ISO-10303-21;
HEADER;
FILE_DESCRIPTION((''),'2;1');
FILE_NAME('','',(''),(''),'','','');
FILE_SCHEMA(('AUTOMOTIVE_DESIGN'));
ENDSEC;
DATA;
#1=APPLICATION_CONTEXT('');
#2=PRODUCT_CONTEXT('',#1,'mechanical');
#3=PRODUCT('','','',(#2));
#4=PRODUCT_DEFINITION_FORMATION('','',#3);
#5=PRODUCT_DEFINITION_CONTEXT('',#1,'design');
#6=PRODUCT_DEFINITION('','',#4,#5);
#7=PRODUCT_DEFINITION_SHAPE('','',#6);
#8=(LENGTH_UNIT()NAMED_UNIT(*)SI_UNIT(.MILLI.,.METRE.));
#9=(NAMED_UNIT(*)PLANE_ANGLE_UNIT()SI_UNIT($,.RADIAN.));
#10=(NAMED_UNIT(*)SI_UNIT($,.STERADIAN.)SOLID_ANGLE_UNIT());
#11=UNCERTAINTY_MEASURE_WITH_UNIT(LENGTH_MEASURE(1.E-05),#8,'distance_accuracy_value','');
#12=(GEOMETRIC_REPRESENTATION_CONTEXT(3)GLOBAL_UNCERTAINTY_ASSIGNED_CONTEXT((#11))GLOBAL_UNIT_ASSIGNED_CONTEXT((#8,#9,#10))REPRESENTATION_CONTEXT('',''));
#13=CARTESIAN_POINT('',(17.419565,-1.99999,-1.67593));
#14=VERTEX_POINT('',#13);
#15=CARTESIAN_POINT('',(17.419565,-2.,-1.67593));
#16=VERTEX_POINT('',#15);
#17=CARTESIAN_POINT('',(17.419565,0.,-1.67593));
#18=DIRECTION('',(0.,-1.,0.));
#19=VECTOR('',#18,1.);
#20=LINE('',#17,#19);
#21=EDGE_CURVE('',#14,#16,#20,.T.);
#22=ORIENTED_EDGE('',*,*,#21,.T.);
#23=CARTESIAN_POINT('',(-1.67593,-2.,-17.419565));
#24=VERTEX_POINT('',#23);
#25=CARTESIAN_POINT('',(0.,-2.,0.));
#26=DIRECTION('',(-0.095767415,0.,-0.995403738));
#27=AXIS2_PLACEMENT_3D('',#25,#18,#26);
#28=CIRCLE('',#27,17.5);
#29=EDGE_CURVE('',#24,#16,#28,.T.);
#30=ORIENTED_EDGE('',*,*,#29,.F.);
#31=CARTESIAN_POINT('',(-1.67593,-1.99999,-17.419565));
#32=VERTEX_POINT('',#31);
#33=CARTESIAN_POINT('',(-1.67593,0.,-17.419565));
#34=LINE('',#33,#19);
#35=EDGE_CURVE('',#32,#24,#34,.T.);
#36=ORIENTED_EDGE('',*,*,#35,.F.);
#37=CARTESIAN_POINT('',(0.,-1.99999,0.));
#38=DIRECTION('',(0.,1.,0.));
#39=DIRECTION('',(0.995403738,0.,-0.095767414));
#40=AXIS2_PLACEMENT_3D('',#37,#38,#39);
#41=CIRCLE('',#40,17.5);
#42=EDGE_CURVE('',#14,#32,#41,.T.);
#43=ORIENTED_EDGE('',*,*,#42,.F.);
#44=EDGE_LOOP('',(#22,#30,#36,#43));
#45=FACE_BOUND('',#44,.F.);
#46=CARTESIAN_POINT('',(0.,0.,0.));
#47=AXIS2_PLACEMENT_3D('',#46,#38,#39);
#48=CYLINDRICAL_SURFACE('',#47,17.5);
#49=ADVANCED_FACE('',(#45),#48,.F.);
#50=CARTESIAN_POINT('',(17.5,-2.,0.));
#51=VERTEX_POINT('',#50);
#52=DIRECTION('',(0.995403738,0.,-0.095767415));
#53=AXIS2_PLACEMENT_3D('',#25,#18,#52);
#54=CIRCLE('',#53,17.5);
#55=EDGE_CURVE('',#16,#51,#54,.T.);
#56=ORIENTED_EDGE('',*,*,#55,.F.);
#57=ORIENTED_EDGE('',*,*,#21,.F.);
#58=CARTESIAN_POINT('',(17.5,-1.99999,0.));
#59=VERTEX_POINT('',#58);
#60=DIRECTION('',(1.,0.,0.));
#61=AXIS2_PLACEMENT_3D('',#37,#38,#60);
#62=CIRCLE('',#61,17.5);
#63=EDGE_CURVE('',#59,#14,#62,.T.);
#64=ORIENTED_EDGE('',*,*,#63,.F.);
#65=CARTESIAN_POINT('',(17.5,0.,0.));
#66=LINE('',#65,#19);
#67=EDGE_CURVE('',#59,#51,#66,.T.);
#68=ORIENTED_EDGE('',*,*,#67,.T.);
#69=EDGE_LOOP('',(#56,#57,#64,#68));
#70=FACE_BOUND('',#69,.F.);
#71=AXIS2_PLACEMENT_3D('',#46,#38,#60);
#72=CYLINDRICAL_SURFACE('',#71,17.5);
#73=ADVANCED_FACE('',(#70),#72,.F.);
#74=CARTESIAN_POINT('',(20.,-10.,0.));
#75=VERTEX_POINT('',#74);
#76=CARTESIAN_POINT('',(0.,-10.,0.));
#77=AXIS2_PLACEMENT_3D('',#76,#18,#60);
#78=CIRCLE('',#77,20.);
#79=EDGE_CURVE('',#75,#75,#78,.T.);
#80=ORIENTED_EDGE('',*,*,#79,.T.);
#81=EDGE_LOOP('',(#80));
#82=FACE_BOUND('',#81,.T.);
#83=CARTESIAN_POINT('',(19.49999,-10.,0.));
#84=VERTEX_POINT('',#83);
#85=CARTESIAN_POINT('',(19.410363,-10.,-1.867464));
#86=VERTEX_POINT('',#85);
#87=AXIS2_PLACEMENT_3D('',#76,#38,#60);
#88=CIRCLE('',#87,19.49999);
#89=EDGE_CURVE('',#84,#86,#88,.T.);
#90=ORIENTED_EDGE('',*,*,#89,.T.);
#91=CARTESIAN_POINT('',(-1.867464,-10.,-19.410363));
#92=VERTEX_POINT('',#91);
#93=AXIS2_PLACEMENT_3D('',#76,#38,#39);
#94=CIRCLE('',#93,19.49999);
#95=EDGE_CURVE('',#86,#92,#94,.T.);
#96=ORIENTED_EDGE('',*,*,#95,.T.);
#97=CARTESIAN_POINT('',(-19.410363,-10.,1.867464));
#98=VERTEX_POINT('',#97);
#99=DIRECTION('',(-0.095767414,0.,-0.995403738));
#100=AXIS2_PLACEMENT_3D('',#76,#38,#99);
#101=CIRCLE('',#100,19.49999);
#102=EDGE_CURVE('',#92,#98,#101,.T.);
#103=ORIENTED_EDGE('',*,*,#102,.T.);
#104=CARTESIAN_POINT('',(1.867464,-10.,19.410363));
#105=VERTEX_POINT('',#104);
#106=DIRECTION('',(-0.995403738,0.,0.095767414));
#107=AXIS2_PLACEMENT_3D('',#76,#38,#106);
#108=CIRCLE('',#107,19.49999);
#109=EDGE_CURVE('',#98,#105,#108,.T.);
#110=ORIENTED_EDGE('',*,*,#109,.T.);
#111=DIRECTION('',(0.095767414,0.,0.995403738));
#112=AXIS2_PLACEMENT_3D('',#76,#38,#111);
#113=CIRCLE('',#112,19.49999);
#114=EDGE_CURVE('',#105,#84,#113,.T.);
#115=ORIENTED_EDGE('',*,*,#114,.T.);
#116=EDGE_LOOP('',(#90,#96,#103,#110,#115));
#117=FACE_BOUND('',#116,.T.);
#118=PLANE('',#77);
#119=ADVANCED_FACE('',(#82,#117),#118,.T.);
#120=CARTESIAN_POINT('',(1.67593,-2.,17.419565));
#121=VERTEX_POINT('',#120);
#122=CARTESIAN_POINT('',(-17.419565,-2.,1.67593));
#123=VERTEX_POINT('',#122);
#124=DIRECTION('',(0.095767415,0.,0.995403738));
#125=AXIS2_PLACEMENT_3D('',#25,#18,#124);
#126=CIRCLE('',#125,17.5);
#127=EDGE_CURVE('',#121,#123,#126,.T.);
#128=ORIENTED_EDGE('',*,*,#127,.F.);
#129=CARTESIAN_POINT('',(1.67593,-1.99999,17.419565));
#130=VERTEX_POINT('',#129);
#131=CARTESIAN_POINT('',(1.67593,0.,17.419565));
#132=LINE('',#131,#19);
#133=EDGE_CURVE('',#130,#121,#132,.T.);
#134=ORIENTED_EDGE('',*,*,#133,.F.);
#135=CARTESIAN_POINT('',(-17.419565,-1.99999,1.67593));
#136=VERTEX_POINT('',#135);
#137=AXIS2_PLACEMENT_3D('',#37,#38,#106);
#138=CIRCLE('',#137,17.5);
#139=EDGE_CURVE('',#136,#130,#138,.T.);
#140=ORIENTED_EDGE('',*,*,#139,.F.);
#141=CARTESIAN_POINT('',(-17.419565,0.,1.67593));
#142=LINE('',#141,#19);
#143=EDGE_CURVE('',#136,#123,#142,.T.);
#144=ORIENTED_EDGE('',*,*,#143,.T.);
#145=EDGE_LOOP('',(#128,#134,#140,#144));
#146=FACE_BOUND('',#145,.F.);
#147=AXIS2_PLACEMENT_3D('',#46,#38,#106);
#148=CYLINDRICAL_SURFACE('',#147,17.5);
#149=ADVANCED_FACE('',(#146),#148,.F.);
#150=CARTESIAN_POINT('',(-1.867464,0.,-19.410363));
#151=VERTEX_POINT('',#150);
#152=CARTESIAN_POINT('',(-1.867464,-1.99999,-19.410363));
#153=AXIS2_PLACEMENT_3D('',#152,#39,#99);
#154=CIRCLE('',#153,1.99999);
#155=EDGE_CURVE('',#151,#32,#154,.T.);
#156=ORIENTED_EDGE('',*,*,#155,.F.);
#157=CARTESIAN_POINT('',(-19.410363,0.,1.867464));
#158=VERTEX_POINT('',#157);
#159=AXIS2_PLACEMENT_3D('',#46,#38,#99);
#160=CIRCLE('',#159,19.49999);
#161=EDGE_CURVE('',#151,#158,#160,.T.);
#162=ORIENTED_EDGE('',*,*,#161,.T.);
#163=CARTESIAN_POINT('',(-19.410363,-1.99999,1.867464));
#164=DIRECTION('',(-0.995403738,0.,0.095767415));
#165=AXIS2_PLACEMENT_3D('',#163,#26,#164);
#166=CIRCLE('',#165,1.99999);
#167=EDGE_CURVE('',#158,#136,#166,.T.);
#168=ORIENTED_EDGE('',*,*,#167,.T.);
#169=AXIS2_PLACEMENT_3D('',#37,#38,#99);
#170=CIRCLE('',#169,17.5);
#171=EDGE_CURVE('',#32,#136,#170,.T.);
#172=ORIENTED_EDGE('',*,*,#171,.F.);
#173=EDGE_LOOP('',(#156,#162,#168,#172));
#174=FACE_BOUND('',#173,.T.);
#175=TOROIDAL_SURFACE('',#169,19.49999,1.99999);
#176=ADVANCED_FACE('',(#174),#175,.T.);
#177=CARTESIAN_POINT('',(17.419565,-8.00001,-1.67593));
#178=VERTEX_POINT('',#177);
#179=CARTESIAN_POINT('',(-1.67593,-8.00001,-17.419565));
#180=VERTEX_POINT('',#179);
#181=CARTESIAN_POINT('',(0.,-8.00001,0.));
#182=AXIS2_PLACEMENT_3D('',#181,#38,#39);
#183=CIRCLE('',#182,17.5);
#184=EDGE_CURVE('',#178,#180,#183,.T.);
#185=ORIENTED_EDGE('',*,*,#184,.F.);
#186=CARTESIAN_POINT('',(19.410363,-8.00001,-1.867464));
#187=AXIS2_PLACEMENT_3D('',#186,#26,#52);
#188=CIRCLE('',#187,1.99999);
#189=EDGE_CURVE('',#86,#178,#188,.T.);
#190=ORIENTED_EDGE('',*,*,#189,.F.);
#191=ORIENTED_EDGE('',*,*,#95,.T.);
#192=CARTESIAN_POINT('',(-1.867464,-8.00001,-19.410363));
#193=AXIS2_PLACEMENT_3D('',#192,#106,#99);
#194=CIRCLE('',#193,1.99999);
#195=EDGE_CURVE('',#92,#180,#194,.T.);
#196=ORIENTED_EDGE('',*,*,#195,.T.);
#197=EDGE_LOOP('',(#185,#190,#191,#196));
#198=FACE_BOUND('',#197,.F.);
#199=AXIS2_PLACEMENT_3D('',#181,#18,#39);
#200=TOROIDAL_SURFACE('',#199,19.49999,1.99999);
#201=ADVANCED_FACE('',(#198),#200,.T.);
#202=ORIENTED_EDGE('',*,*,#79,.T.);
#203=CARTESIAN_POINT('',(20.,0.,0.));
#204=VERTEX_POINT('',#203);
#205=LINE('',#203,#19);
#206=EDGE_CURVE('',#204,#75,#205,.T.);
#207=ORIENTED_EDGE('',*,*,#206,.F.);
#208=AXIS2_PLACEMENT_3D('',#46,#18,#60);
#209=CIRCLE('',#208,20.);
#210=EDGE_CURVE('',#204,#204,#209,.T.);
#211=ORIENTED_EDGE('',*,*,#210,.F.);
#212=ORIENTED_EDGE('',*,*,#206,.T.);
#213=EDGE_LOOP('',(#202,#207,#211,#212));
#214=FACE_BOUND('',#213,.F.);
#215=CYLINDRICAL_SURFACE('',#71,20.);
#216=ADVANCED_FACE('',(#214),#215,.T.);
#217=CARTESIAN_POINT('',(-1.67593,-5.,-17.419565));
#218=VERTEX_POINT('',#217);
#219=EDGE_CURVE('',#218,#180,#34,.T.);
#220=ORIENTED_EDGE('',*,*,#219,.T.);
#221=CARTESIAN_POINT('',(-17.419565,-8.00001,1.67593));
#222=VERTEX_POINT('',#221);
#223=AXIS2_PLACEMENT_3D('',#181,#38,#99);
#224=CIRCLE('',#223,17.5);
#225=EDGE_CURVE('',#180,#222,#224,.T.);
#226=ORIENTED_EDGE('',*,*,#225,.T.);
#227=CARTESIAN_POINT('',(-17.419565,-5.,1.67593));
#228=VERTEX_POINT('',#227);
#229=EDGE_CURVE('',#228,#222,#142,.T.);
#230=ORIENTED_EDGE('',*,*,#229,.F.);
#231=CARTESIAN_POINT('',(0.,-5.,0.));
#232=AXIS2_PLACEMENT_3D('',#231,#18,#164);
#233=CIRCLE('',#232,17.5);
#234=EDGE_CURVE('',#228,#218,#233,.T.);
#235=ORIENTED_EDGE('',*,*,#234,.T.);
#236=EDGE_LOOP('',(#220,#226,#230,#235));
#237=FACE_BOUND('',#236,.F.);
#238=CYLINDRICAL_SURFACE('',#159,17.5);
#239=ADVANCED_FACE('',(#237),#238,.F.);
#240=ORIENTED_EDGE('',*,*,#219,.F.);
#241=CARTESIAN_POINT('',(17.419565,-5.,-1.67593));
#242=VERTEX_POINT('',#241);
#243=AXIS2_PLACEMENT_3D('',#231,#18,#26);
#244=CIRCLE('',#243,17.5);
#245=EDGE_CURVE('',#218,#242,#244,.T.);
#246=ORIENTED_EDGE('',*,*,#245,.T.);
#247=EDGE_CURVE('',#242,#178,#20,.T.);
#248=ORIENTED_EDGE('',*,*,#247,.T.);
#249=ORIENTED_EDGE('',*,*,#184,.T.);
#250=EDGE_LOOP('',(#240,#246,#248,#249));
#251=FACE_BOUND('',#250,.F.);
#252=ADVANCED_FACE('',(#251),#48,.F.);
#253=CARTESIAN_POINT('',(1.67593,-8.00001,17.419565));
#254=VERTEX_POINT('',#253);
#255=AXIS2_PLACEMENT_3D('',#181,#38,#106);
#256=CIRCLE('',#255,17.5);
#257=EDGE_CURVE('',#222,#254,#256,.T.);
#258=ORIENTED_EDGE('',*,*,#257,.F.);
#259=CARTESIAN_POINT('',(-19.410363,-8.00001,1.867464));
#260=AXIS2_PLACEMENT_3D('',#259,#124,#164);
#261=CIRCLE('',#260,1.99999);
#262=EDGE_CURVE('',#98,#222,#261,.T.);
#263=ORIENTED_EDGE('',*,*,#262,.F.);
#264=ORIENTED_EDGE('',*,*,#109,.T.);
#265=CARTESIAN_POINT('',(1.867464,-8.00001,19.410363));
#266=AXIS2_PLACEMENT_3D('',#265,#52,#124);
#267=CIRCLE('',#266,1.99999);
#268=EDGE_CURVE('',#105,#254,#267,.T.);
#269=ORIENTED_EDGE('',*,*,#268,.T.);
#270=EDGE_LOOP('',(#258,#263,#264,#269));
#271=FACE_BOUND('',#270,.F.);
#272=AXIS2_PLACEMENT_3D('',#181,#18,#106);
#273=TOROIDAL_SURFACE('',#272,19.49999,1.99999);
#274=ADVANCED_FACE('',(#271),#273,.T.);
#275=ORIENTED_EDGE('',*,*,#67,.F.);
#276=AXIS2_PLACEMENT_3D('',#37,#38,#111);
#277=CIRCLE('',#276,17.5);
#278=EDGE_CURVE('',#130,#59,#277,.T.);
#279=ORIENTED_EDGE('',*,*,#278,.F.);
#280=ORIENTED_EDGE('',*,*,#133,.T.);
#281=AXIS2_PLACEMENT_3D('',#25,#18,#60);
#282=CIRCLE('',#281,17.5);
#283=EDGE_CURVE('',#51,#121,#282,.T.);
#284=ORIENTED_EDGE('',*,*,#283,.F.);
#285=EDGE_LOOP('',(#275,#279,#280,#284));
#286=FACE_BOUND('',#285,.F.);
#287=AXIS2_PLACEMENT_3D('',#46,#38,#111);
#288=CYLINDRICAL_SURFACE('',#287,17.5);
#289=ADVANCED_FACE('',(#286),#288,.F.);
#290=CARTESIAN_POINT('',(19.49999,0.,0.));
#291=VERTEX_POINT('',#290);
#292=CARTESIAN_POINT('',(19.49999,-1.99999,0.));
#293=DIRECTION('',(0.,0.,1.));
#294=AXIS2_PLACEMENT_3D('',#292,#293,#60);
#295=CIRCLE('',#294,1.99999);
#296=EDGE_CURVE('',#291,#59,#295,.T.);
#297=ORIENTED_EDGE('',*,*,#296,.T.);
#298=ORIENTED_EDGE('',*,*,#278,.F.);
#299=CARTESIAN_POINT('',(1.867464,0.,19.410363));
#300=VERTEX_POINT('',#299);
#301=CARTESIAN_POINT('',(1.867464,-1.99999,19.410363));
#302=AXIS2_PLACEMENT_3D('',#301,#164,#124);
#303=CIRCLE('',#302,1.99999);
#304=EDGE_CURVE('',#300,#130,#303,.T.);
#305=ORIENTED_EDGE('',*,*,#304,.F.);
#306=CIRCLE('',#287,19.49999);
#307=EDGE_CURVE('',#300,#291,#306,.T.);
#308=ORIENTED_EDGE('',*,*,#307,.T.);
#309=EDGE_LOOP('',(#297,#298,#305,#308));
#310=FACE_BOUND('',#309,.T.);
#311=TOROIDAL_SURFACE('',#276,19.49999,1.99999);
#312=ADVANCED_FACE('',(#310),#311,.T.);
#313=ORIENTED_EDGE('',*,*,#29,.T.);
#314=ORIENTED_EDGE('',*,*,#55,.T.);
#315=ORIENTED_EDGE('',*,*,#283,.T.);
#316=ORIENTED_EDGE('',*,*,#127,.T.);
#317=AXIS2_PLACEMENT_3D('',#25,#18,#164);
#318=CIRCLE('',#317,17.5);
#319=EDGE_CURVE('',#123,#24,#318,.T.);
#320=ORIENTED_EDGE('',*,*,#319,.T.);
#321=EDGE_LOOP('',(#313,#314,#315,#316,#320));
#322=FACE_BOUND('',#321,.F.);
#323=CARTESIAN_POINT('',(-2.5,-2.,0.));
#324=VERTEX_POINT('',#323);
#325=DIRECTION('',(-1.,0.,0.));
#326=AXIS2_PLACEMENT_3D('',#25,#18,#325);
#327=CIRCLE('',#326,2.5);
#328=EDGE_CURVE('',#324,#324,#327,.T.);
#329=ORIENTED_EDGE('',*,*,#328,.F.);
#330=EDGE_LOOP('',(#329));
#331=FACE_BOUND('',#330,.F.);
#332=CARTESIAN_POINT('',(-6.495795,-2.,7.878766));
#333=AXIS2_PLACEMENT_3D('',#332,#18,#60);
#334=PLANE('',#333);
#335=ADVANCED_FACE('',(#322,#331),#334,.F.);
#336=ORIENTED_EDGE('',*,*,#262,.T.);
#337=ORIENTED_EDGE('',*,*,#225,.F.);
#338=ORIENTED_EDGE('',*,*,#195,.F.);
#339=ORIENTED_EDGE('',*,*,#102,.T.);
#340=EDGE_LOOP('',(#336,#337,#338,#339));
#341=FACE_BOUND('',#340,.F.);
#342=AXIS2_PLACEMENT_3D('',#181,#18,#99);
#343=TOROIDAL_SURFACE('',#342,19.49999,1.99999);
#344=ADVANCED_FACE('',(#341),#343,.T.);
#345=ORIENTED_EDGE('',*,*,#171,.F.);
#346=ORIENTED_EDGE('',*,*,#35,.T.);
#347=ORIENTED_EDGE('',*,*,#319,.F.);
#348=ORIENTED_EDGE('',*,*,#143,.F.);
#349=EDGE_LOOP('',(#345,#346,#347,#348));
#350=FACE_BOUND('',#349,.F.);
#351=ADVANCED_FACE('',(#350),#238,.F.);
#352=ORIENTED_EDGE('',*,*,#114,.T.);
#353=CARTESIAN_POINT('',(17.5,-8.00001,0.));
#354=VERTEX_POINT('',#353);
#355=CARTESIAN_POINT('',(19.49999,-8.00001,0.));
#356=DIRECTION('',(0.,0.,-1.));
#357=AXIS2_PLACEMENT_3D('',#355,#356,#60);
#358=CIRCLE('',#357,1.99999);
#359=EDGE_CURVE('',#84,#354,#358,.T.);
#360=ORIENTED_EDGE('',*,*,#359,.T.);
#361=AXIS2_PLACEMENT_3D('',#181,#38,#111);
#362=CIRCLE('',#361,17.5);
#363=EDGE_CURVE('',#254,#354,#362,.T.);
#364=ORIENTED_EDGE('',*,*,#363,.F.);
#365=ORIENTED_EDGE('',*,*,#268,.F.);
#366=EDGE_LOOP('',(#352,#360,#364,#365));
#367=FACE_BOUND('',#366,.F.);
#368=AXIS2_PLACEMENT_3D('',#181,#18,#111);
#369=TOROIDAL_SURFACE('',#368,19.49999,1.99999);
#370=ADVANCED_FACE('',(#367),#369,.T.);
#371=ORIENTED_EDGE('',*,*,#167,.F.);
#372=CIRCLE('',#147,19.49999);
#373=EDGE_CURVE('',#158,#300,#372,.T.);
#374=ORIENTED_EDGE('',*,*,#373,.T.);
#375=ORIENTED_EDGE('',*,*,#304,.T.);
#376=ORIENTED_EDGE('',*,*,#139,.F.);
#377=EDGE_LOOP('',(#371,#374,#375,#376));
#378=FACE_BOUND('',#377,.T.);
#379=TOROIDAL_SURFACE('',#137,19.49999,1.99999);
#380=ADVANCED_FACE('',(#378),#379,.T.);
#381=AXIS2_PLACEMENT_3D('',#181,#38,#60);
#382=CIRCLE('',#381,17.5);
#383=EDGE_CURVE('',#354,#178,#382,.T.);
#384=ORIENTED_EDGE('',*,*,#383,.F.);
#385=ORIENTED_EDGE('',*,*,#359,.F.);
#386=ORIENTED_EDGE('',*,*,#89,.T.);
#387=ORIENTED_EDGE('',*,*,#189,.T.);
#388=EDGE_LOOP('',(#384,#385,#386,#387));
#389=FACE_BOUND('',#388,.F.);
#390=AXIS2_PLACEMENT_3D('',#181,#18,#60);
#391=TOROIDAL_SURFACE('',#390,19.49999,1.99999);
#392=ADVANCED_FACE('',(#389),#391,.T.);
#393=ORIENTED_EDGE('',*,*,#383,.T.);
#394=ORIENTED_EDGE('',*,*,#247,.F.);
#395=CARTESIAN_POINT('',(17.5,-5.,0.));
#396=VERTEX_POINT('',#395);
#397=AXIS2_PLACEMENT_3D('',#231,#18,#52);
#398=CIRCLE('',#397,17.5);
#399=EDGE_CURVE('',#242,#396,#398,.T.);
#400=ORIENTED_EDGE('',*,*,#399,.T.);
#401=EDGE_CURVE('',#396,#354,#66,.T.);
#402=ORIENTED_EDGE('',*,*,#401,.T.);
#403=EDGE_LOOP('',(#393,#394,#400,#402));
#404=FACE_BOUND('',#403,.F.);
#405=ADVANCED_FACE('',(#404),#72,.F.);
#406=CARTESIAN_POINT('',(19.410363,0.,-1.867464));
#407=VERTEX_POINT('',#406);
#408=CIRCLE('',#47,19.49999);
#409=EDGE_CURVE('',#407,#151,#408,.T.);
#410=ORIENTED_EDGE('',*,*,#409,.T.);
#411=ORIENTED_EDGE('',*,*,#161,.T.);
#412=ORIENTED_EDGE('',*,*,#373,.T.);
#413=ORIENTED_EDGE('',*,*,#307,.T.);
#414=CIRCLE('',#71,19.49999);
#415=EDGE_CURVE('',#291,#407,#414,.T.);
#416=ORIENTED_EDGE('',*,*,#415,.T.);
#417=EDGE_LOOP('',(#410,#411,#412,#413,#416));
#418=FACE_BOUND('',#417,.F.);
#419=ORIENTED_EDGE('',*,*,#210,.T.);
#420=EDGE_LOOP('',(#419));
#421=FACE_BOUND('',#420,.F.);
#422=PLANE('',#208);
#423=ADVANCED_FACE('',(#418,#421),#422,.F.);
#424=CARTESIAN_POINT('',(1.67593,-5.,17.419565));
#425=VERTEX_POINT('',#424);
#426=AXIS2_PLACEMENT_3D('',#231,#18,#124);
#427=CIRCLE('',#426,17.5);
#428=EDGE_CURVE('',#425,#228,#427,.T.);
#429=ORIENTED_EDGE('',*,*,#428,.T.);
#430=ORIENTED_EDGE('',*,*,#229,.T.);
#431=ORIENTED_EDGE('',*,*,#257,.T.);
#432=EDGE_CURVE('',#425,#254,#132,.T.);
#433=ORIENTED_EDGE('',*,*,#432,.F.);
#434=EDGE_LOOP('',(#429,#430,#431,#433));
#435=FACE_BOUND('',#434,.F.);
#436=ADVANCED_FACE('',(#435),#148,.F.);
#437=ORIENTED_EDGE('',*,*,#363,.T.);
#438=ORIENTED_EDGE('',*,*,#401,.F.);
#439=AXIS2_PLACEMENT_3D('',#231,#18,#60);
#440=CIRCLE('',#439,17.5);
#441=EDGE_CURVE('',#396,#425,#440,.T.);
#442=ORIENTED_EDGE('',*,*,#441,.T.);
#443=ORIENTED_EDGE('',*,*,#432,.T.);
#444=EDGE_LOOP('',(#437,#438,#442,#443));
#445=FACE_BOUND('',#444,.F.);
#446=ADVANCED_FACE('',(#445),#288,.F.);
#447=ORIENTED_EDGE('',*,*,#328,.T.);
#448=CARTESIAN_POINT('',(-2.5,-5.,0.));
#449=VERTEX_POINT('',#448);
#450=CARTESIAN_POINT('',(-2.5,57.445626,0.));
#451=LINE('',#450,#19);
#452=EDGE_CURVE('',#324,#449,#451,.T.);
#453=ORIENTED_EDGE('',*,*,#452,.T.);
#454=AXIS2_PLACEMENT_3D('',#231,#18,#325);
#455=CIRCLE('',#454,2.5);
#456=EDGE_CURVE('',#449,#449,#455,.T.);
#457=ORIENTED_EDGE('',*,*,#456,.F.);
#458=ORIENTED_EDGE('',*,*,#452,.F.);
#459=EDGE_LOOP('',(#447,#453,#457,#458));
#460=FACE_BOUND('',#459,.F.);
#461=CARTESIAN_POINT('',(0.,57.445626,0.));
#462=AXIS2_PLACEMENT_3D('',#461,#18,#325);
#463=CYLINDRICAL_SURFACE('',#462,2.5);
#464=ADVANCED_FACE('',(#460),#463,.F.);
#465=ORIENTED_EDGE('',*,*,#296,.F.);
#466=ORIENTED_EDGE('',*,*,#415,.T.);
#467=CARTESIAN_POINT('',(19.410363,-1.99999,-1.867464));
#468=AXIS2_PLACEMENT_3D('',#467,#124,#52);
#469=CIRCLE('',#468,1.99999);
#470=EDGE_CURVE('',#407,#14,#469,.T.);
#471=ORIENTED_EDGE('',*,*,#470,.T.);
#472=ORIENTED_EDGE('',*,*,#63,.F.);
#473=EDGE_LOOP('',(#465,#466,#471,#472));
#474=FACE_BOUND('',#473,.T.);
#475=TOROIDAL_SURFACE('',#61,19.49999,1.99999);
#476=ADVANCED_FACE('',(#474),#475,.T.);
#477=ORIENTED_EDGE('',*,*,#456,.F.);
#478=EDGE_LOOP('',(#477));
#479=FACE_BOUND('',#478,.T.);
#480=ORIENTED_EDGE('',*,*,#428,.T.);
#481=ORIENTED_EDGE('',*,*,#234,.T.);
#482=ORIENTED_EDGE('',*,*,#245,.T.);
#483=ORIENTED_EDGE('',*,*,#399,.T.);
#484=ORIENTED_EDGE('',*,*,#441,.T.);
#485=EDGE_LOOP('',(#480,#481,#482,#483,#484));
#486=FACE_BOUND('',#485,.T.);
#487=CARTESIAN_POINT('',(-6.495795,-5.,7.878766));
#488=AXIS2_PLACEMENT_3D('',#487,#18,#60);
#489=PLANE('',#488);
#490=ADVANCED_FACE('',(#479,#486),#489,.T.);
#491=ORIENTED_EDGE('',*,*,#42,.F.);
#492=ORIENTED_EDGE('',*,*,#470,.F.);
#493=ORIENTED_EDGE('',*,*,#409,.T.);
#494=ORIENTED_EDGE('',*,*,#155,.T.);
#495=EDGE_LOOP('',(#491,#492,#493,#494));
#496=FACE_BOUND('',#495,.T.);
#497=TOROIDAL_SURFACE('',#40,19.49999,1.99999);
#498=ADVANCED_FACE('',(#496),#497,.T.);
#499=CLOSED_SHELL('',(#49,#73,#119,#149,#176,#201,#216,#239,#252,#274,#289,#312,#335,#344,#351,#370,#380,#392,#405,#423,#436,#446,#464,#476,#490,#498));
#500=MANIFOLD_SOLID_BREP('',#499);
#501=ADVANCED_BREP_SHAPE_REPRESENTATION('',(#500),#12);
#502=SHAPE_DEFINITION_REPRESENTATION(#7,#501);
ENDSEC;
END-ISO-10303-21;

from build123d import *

# Parameters (mm, degrees)
F0_R     = 20
F1_DEPTH = 10
F2_START = 2
F2_DEPTH = 3
F3_R     = 1.99999
F4_D     = 5


# Not quite as in the source:
# - a fillet or chamfer is up to 0.001 mm smaller than in the source, because OpenCascade refuses the exact size


with BuildPart() as f1:
    # F0 (on Front) → F1 (new body)
    with BuildSketch(Plane.XZ):
        Circle(F0_R)
        with BuildLine():
            ThreePointArc((1.6759297538, 17.4195654211), (12.9533542122, 11.766928854), (17.5, 0))
            ThreePointArc((17.5, 0), (17.4798797889, -0.8389294162), (17.4195654211, -1.6759297538))
            ThreePointArc((17.4195654211, -1.6759297538), (11.1324315409, -13.5025541283), (-1.6759297538, -17.4195654211))
            ThreePointArc((-1.6759297538, -17.4195654211), (-13.5025541283, -11.1324315409), (-17.4195654211, 1.6759297538))
            ThreePointArc((-17.4195654211, 1.6759297538), (-11.1324315409, 13.5025541283), (1.6759297538, 17.4195654211))
        make_face(mode=Mode.SUBTRACT)
    extrude(amount=F1_DEPTH)

    # F0 (on Front) → F2 (join)
    with BuildSketch(Plane.XZ.offset(F2_START)):
        with BuildLine():
            Line((0, 0), (1.6759297538, 17.4195654211))
            ThreePointArc((1.6759297538, 17.4195654211), (-11.1324315409, 13.5025541283), (-17.4195654211, 1.6759297538))
            Line((-17.4195654211, 1.6759297538), (0, 0))
        make_face()
        with BuildLine():
            ThreePointArc((-1.6759297538, -17.4195654211), (11.1324315409, -13.5025541283), (17.4195654211, -1.6759297538))
            Line((17.4195654211, -1.6759297538), (0, 0))
            Line((0, 0), (-1.6759297538, -17.4195654211))
        make_face()
        with BuildLine():
            Line((0, 0), (-17.4195654211, 1.6759297538))
            ThreePointArc((-17.4195654211, 1.6759297538), (-13.5025541283, -11.1324315409), (-1.6759297538, -17.4195654211))
            Line((-1.6759297538, -17.4195654211), (0, 0))
        make_face()
        with BuildLine():
            ThreePointArc((17.4195654211, -1.6759297538), (17.4798797889, -0.8389294162), (17.5, 0))
            ThreePointArc((17.5, 0), (12.9533542122, 11.766928854), (1.6759297538, 17.4195654211))
            Line((1.6759297538, 17.4195654211), (0, 0))
            Line((0, 0), (17.4195654211, -1.6759297538))
        make_face()
    extrude(amount=F2_DEPTH)

    # F3 (radius 2 in the source; OpenCascade refuses exactly that, so slightly less here)
    f3_edges = [f1.edges().sort_by_distance(p)[0] for p in [
        (-17.5, -10, 0),
        (-17.5, 0, 0),
    ]]
    fillet(f3_edges, radius=F3_R)

    # F4 (through all)
    with Locations(Plane(origin=(0, 0, 0), x_dir=(1, 0, 0), z_dir=(0, 1, 0))):
        with Locations((0, 0)):
            Hole(F4_D / 2)


solid = f1.part
